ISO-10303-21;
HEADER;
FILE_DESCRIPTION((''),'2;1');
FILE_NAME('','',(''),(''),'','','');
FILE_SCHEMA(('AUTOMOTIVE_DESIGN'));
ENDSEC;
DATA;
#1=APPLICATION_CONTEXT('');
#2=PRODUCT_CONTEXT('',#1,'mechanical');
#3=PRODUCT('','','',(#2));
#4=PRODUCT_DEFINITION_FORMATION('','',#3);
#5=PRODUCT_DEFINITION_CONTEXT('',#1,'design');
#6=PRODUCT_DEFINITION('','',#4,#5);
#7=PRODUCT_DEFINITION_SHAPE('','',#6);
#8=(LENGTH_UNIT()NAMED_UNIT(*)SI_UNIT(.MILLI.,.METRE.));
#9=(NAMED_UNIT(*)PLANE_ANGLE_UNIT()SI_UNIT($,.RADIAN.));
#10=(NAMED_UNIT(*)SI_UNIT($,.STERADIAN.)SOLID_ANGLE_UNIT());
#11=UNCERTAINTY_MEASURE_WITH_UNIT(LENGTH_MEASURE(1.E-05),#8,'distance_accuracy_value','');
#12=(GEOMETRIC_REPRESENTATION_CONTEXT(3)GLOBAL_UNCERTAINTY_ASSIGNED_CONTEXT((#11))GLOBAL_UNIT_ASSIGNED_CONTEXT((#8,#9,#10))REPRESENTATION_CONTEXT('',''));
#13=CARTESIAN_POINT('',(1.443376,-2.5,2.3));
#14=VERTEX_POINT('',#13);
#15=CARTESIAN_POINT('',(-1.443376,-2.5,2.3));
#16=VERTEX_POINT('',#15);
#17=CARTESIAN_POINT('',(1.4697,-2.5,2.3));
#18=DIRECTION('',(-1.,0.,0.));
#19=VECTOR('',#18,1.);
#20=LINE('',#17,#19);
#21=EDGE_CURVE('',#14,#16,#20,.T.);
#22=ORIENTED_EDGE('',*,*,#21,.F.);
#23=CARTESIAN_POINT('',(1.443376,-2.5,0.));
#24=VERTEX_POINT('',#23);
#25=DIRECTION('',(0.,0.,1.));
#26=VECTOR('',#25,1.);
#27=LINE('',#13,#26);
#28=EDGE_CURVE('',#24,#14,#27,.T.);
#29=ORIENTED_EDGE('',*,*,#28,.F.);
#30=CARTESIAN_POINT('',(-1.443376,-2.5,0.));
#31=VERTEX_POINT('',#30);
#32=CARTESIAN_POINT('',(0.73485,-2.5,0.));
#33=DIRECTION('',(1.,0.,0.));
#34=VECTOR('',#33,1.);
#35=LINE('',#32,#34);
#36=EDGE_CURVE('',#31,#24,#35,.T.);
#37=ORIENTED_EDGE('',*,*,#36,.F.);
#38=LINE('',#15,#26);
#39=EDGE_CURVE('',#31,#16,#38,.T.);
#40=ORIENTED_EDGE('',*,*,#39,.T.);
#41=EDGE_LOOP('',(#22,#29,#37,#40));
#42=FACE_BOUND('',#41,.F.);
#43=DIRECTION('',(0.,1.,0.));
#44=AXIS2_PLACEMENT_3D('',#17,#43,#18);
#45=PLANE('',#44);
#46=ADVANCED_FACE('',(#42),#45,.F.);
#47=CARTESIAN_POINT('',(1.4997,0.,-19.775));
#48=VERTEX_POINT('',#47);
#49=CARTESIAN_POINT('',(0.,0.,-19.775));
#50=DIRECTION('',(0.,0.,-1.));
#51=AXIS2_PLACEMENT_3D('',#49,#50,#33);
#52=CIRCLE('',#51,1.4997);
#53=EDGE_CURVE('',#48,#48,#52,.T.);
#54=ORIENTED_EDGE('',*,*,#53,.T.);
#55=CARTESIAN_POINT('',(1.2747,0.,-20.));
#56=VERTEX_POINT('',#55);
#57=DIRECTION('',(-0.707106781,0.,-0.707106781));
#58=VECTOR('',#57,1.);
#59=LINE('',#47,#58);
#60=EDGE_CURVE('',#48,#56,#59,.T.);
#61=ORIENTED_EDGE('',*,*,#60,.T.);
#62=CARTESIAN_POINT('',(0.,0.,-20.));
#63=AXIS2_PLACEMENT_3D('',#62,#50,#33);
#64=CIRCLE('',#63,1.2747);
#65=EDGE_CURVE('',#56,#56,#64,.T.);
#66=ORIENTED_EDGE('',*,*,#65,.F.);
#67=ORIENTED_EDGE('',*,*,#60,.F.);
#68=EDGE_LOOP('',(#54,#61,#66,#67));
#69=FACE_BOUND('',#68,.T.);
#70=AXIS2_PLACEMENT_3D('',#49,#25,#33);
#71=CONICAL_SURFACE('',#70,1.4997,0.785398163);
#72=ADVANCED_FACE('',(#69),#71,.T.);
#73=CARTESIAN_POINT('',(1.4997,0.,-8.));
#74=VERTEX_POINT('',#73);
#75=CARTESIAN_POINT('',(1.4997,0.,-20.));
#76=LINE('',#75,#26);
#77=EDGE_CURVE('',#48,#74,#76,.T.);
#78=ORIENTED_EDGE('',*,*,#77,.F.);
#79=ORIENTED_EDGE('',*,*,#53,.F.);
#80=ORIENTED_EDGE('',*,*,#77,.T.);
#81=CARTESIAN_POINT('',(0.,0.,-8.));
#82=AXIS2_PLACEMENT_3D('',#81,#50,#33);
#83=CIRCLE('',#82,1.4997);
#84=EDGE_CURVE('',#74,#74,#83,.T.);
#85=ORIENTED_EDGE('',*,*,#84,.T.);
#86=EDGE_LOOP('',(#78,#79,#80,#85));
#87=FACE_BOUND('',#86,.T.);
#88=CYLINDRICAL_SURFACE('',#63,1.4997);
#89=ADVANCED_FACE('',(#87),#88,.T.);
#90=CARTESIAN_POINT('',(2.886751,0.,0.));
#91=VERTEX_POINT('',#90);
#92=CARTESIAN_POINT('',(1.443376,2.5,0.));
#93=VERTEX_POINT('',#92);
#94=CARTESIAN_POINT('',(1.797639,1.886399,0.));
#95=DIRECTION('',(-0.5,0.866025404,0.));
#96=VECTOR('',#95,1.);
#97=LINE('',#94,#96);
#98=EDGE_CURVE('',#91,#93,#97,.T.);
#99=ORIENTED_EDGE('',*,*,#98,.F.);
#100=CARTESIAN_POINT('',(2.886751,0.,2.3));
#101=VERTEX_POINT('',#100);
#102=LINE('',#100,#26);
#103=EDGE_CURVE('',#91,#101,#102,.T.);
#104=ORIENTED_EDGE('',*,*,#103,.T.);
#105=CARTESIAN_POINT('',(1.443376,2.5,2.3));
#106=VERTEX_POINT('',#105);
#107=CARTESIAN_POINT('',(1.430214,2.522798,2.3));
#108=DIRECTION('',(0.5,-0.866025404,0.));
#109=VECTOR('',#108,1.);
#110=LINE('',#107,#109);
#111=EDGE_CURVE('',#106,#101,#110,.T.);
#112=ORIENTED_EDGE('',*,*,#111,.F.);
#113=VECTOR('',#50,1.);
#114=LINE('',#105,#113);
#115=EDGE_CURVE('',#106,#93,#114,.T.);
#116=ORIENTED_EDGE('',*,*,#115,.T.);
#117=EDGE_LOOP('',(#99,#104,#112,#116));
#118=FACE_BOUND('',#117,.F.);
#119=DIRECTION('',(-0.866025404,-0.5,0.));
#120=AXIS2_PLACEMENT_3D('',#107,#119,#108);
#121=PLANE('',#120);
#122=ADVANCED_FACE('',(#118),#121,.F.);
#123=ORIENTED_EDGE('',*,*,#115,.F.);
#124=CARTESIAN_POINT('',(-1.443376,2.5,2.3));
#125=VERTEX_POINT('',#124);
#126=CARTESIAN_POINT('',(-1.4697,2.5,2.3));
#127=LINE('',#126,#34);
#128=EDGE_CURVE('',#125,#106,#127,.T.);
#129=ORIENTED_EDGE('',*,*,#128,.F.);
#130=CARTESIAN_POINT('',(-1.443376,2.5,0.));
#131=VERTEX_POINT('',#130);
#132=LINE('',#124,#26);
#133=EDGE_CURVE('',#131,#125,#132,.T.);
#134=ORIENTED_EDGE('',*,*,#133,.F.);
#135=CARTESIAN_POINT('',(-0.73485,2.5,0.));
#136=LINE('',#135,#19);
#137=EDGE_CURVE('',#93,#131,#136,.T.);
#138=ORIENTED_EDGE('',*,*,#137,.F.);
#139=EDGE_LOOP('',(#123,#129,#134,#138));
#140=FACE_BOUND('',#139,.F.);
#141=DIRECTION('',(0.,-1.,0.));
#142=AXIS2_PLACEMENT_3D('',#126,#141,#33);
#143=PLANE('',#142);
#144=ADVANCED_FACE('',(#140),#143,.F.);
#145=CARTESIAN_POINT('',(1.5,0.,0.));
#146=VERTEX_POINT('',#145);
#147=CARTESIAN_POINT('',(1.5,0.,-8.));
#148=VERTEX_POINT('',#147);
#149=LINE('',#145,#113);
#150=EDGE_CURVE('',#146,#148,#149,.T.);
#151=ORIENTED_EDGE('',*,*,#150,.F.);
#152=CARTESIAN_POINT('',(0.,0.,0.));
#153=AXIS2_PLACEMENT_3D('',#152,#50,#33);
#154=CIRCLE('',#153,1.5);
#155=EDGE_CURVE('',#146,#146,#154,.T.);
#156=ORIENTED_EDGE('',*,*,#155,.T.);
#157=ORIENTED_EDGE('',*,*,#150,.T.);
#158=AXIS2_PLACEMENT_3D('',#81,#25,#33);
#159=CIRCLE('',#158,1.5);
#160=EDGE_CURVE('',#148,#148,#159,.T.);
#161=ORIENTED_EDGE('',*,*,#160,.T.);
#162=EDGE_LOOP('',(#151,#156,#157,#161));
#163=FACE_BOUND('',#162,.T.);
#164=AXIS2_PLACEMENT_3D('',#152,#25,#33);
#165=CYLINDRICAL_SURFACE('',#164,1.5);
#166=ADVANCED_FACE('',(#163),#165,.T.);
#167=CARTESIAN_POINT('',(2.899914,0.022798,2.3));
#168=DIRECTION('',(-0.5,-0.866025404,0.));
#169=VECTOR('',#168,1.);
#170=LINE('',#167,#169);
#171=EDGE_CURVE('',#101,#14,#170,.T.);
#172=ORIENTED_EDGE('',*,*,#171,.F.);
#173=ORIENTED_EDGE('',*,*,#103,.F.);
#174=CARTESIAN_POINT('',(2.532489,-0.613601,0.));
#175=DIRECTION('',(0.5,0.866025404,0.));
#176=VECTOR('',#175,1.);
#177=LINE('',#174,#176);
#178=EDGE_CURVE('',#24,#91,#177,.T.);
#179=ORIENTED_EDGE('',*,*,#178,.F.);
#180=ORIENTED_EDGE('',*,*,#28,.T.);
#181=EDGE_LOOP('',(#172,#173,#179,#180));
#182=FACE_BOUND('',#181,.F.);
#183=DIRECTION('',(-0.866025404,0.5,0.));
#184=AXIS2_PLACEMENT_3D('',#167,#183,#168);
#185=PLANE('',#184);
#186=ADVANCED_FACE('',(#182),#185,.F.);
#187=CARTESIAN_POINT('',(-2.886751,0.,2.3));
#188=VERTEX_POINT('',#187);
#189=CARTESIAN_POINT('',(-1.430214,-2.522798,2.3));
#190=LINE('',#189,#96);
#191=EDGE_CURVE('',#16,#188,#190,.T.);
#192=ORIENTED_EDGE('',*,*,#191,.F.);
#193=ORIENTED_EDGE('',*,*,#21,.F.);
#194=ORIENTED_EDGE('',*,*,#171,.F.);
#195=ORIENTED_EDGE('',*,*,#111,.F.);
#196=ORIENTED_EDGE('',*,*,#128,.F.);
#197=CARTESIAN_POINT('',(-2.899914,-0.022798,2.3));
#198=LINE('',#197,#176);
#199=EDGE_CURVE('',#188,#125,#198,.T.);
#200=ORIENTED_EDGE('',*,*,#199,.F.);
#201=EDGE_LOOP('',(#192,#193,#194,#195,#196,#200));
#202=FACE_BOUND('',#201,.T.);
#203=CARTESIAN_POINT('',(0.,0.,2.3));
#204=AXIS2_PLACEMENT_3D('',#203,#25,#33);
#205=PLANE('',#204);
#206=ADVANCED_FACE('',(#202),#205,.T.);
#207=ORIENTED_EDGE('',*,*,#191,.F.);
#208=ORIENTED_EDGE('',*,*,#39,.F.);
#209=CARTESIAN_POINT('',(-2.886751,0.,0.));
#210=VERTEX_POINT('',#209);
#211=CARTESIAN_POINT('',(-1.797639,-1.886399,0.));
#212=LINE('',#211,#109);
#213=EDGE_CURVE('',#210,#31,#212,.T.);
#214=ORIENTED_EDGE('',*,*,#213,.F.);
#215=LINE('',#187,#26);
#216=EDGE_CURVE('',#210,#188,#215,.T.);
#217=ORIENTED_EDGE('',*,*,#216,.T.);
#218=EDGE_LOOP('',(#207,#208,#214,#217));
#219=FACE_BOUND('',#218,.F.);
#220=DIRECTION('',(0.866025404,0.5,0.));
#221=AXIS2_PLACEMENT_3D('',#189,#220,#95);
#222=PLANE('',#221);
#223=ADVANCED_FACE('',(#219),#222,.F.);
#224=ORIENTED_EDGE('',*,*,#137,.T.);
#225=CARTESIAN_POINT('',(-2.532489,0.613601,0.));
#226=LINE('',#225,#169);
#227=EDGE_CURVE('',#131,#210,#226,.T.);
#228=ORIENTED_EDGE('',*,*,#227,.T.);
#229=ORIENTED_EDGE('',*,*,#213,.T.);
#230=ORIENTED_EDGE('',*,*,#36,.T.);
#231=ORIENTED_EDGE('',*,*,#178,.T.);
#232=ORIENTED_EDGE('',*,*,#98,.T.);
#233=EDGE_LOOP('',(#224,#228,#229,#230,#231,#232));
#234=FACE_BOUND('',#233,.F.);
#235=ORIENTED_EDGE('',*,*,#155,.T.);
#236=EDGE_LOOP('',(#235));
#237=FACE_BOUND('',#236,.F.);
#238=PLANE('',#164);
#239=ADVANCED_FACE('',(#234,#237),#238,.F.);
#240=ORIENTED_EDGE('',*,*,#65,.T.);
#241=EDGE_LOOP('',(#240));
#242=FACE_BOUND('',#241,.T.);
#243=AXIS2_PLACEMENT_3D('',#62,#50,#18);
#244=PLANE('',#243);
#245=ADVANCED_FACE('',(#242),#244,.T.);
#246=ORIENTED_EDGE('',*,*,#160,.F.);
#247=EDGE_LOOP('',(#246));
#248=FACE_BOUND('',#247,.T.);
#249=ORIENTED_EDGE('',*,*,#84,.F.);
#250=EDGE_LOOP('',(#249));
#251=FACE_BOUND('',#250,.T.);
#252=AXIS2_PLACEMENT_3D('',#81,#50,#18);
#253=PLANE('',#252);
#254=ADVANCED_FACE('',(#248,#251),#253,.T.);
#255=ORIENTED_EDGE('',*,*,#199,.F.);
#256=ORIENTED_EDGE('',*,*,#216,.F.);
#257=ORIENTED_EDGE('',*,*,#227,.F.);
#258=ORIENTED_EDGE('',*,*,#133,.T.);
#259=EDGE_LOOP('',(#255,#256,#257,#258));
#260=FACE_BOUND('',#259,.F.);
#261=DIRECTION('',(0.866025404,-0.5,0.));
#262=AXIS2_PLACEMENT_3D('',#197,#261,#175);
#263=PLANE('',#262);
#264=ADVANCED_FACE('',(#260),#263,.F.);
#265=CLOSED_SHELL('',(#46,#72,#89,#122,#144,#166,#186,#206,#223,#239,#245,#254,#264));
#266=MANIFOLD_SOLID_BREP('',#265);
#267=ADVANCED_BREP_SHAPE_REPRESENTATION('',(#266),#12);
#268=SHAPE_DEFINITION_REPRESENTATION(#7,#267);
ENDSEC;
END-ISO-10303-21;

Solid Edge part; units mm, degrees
sketch "Sketch1" plane through (0, 0, 0) normal (0, 0, 1) x (1, 0, 0)
  circle A0 centre (0, 0) radius 2.9
  dimension "D1" = 5.8
extrude "Protrusion1" add sketch "Sketch1" along normal blind 2.3
sketch "Sketch2" plane through (0, 0, 0) normal (0, 0, -1) x (1, 0, 0)
  circle A0 centre (0, 0) radius 1.5
extrude "Protrusion2" add sketch "Sketch2" along normal blind 20
sketch "Sketch3" plane through (0, 0, -20) normal (0, 0, -1) x (1, 0, 0)
  circle A0 centre (0, 0) radius 1.4997
extrude "Cutout1" cut sketch "Sketch3" against normal blind 12 flip side to cut
chamfer "Chamfer_1" distance 0.225 angle 45 1 edges at (-1.4997, 0, -20)
sketch "Sketch4" plane through (0, 0, 2.3) normal (0, 0, 1) x (1, 0, 0)
  line L0 (-1.4697, 2.5) -> (1.4697, 2.5)
  dimension "D1" = 5
extrude "Cutout2" cut sketch "Sketch4" against normal up to next material side at (0, 2.55, 2.3)
pattern_circular "Pattern1" count 6 over 360 about axis through (0, 0, 2.3) along (0, 0, 1) of "Cutout2"
properties part number "24102767"
